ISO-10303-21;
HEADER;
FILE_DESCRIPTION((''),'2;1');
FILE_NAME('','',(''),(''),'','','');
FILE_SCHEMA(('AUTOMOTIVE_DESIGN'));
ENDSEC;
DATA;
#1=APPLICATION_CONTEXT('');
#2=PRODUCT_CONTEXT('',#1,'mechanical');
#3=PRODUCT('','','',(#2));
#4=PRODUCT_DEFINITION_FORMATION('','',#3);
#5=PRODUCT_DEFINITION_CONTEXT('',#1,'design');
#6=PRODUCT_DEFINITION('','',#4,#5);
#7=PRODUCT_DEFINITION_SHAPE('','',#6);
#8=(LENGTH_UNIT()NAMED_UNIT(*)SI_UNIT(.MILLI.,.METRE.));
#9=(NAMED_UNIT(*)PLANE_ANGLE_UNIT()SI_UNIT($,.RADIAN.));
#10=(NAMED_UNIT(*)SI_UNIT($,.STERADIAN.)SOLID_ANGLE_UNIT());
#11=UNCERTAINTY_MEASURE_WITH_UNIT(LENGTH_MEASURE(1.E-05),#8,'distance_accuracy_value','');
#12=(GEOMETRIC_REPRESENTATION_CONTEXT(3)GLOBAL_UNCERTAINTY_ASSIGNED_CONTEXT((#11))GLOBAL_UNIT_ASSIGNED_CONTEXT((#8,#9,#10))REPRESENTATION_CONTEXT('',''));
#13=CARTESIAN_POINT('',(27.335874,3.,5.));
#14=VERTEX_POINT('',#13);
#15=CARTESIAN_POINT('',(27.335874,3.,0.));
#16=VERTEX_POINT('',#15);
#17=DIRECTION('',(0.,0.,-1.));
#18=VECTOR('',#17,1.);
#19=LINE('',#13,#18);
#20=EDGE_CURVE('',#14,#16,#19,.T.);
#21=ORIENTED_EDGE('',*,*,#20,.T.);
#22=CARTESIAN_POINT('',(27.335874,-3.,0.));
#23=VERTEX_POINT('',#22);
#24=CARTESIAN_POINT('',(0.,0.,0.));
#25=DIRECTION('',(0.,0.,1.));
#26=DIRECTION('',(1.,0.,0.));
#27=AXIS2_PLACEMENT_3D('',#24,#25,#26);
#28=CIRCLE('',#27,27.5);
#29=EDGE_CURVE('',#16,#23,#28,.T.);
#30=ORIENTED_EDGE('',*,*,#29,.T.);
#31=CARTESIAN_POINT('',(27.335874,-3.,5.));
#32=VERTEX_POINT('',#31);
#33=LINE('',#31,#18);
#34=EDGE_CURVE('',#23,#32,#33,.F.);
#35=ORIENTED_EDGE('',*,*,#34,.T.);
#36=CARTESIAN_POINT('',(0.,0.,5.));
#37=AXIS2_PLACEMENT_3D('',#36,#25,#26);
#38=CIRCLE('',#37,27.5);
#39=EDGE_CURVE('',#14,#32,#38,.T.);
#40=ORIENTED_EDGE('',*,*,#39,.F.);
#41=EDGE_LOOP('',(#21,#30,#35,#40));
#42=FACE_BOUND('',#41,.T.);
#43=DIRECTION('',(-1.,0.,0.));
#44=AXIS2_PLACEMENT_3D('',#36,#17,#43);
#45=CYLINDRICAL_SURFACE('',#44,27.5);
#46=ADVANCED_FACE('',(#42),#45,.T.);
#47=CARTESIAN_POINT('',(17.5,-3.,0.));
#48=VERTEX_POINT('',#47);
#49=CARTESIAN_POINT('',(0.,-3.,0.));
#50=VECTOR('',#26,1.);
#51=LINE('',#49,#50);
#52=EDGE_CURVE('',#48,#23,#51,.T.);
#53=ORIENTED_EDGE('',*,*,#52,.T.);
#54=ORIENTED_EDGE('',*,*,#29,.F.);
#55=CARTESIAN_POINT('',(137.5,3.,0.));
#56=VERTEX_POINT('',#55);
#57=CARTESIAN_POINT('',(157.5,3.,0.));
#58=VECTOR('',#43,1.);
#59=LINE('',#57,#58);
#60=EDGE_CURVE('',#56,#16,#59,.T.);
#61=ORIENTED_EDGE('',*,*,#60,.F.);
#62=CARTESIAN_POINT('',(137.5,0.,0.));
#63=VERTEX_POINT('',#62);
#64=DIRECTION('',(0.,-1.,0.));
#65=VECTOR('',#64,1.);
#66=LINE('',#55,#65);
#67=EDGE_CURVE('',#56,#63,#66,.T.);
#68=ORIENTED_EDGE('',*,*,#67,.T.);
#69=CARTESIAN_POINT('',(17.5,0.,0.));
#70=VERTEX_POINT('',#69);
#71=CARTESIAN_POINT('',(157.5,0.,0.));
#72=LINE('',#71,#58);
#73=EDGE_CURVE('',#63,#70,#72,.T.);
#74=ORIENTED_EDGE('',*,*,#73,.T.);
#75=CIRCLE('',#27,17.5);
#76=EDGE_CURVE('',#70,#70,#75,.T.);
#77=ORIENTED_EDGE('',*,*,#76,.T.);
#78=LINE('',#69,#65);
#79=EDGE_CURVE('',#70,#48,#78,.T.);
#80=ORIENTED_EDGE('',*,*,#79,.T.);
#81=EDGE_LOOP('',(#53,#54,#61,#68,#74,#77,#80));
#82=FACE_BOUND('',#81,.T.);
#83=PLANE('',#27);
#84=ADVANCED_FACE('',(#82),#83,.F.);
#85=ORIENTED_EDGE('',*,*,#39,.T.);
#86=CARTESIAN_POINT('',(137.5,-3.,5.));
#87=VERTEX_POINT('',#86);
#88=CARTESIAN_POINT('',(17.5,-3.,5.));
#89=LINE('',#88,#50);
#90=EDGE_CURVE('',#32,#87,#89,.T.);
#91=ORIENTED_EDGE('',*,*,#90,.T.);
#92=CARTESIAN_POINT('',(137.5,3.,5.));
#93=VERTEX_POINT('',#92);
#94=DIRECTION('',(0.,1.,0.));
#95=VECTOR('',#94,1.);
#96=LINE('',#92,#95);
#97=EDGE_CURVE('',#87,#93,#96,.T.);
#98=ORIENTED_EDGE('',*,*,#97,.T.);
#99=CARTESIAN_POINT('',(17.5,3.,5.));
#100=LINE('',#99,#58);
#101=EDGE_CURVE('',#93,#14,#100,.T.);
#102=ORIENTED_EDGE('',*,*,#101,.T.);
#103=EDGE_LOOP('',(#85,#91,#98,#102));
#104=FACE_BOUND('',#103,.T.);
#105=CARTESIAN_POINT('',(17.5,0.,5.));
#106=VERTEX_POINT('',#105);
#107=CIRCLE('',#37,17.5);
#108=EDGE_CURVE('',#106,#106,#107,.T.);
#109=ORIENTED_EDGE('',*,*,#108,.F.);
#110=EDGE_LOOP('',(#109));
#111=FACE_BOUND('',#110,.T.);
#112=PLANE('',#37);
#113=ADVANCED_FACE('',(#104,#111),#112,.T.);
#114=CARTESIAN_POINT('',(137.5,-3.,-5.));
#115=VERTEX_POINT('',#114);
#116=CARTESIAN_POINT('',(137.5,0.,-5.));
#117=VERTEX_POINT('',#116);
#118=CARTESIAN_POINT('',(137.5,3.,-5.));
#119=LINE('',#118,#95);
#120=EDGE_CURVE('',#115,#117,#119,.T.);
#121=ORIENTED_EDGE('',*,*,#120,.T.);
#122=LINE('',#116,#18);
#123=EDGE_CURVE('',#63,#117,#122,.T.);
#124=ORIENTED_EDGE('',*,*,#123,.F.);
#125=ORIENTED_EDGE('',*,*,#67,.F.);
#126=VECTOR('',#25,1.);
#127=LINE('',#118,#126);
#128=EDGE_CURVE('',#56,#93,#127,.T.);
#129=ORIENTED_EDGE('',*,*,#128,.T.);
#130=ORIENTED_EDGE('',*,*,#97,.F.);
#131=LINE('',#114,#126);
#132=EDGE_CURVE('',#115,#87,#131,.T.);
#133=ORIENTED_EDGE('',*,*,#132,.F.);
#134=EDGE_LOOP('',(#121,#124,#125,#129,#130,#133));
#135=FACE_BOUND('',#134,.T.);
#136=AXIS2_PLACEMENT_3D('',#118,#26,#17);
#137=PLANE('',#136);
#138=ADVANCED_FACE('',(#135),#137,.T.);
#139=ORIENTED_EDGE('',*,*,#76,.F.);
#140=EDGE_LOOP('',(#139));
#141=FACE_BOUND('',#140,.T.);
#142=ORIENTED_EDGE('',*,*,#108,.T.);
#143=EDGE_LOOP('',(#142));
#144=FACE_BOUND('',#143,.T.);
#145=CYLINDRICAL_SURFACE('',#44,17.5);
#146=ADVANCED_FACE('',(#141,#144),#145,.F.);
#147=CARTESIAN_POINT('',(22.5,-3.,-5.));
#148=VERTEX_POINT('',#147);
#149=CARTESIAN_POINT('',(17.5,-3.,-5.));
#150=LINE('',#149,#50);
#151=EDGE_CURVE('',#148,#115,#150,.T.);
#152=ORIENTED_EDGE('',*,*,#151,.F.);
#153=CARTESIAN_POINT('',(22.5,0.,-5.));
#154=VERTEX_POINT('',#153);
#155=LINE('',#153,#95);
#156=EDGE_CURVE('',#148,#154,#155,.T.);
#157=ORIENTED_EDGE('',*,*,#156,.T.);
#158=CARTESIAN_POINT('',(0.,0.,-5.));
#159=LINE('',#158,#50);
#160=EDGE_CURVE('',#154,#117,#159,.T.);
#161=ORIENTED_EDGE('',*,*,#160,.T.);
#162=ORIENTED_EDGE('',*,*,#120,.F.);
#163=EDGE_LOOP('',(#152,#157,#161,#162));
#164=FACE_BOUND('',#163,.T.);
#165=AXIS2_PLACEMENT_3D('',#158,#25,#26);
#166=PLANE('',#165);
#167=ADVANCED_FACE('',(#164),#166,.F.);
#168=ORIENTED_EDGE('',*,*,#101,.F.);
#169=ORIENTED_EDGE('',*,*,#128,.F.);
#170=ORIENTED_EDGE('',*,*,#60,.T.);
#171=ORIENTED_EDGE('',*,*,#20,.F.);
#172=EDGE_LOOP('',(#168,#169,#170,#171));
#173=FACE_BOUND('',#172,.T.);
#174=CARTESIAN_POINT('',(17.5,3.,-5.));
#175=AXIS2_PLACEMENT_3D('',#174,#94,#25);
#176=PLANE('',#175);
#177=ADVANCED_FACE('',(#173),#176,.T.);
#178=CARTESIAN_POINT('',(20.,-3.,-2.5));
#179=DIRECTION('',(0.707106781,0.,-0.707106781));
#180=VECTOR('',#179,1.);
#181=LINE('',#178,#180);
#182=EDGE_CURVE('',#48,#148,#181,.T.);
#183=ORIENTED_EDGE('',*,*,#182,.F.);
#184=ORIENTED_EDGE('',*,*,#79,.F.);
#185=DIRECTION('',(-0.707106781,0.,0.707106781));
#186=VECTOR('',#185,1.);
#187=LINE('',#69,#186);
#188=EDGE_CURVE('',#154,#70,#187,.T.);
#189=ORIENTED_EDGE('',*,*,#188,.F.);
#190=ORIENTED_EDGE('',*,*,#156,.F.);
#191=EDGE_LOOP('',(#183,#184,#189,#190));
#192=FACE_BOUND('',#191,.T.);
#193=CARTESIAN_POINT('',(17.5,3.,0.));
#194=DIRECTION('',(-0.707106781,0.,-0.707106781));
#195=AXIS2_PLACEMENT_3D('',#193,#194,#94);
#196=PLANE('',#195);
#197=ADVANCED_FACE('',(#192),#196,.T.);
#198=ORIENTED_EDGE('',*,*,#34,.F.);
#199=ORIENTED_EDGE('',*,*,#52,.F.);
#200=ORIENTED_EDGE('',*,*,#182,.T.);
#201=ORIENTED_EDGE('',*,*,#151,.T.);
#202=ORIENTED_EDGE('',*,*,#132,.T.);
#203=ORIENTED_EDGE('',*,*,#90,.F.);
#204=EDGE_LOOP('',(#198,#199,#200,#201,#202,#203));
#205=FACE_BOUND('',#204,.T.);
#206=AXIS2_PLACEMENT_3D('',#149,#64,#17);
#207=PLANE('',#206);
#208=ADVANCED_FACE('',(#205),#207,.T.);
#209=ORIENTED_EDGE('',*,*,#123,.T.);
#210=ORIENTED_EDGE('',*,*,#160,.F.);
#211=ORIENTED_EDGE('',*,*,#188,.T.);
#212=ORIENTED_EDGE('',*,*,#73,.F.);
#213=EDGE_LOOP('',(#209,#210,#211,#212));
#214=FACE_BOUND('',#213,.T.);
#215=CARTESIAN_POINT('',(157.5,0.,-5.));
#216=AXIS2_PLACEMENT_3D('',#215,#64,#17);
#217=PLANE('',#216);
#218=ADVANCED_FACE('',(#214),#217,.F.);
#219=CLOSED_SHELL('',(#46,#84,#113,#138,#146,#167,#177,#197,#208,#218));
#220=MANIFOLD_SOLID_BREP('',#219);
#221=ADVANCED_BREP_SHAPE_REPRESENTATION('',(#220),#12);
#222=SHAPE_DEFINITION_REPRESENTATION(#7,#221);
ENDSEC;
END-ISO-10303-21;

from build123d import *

# Parameters (mm, degrees)
SKETCH1_R           = 27.5
SKETCH1_R_2         = 17.5
BOSS_EXTRUDE1_DEPTH = 5
SKETCH2_W           = 120
SKETCH2_H           = 6
BOSS_EXTRUDE2_DEPTH = 10
SKETCH3_W           = 5
SKETCH3_H           = 3
CUT_EXTRUDE1_DEPTH  = 140
CHAMFER1_SIZE       = 5


with BuildPart() as part:
    # Sketch1 → Boss-Extrude1 (new body)
    with BuildSketch(Plane.XY):
        Circle(SKETCH1_R)
        Circle(SKETCH1_R_2, mode=Mode.SUBTRACT)
    extrude(amount=BOSS_EXTRUDE1_DEPTH)

    # Sketch2 → Boss-Extrude2 (add)
    with BuildSketch(Plane.XY.offset(5)):
        with Locations((77.5, 0)):
            Rectangle(SKETCH2_W, SKETCH2_H)
    extrude(amount=-BOSS_EXTRUDE2_DEPTH)

    # Sketch3 → Cut-Extrude1 (cut)
    with BuildSketch(Plane.ZY.offset(-17.5)):
        with Locations((-2.5, 1.5)):
            Rectangle(SKETCH3_W, SKETCH3_H)
    extrude(amount=-CUT_EXTRUDE1_DEPTH, mode=Mode.SUBTRACT)

    # Chamfer1
    chamfer1_edges = [part.edges().sort_by_distance(p)[0] for p in [
        (17.5, -1.5, -5),
    ]]
    chamfer(chamfer1_edges, length=CHAMFER1_SIZE - 0.0001)  # a hair under: the kernel refuses the full size


solid = part.part
